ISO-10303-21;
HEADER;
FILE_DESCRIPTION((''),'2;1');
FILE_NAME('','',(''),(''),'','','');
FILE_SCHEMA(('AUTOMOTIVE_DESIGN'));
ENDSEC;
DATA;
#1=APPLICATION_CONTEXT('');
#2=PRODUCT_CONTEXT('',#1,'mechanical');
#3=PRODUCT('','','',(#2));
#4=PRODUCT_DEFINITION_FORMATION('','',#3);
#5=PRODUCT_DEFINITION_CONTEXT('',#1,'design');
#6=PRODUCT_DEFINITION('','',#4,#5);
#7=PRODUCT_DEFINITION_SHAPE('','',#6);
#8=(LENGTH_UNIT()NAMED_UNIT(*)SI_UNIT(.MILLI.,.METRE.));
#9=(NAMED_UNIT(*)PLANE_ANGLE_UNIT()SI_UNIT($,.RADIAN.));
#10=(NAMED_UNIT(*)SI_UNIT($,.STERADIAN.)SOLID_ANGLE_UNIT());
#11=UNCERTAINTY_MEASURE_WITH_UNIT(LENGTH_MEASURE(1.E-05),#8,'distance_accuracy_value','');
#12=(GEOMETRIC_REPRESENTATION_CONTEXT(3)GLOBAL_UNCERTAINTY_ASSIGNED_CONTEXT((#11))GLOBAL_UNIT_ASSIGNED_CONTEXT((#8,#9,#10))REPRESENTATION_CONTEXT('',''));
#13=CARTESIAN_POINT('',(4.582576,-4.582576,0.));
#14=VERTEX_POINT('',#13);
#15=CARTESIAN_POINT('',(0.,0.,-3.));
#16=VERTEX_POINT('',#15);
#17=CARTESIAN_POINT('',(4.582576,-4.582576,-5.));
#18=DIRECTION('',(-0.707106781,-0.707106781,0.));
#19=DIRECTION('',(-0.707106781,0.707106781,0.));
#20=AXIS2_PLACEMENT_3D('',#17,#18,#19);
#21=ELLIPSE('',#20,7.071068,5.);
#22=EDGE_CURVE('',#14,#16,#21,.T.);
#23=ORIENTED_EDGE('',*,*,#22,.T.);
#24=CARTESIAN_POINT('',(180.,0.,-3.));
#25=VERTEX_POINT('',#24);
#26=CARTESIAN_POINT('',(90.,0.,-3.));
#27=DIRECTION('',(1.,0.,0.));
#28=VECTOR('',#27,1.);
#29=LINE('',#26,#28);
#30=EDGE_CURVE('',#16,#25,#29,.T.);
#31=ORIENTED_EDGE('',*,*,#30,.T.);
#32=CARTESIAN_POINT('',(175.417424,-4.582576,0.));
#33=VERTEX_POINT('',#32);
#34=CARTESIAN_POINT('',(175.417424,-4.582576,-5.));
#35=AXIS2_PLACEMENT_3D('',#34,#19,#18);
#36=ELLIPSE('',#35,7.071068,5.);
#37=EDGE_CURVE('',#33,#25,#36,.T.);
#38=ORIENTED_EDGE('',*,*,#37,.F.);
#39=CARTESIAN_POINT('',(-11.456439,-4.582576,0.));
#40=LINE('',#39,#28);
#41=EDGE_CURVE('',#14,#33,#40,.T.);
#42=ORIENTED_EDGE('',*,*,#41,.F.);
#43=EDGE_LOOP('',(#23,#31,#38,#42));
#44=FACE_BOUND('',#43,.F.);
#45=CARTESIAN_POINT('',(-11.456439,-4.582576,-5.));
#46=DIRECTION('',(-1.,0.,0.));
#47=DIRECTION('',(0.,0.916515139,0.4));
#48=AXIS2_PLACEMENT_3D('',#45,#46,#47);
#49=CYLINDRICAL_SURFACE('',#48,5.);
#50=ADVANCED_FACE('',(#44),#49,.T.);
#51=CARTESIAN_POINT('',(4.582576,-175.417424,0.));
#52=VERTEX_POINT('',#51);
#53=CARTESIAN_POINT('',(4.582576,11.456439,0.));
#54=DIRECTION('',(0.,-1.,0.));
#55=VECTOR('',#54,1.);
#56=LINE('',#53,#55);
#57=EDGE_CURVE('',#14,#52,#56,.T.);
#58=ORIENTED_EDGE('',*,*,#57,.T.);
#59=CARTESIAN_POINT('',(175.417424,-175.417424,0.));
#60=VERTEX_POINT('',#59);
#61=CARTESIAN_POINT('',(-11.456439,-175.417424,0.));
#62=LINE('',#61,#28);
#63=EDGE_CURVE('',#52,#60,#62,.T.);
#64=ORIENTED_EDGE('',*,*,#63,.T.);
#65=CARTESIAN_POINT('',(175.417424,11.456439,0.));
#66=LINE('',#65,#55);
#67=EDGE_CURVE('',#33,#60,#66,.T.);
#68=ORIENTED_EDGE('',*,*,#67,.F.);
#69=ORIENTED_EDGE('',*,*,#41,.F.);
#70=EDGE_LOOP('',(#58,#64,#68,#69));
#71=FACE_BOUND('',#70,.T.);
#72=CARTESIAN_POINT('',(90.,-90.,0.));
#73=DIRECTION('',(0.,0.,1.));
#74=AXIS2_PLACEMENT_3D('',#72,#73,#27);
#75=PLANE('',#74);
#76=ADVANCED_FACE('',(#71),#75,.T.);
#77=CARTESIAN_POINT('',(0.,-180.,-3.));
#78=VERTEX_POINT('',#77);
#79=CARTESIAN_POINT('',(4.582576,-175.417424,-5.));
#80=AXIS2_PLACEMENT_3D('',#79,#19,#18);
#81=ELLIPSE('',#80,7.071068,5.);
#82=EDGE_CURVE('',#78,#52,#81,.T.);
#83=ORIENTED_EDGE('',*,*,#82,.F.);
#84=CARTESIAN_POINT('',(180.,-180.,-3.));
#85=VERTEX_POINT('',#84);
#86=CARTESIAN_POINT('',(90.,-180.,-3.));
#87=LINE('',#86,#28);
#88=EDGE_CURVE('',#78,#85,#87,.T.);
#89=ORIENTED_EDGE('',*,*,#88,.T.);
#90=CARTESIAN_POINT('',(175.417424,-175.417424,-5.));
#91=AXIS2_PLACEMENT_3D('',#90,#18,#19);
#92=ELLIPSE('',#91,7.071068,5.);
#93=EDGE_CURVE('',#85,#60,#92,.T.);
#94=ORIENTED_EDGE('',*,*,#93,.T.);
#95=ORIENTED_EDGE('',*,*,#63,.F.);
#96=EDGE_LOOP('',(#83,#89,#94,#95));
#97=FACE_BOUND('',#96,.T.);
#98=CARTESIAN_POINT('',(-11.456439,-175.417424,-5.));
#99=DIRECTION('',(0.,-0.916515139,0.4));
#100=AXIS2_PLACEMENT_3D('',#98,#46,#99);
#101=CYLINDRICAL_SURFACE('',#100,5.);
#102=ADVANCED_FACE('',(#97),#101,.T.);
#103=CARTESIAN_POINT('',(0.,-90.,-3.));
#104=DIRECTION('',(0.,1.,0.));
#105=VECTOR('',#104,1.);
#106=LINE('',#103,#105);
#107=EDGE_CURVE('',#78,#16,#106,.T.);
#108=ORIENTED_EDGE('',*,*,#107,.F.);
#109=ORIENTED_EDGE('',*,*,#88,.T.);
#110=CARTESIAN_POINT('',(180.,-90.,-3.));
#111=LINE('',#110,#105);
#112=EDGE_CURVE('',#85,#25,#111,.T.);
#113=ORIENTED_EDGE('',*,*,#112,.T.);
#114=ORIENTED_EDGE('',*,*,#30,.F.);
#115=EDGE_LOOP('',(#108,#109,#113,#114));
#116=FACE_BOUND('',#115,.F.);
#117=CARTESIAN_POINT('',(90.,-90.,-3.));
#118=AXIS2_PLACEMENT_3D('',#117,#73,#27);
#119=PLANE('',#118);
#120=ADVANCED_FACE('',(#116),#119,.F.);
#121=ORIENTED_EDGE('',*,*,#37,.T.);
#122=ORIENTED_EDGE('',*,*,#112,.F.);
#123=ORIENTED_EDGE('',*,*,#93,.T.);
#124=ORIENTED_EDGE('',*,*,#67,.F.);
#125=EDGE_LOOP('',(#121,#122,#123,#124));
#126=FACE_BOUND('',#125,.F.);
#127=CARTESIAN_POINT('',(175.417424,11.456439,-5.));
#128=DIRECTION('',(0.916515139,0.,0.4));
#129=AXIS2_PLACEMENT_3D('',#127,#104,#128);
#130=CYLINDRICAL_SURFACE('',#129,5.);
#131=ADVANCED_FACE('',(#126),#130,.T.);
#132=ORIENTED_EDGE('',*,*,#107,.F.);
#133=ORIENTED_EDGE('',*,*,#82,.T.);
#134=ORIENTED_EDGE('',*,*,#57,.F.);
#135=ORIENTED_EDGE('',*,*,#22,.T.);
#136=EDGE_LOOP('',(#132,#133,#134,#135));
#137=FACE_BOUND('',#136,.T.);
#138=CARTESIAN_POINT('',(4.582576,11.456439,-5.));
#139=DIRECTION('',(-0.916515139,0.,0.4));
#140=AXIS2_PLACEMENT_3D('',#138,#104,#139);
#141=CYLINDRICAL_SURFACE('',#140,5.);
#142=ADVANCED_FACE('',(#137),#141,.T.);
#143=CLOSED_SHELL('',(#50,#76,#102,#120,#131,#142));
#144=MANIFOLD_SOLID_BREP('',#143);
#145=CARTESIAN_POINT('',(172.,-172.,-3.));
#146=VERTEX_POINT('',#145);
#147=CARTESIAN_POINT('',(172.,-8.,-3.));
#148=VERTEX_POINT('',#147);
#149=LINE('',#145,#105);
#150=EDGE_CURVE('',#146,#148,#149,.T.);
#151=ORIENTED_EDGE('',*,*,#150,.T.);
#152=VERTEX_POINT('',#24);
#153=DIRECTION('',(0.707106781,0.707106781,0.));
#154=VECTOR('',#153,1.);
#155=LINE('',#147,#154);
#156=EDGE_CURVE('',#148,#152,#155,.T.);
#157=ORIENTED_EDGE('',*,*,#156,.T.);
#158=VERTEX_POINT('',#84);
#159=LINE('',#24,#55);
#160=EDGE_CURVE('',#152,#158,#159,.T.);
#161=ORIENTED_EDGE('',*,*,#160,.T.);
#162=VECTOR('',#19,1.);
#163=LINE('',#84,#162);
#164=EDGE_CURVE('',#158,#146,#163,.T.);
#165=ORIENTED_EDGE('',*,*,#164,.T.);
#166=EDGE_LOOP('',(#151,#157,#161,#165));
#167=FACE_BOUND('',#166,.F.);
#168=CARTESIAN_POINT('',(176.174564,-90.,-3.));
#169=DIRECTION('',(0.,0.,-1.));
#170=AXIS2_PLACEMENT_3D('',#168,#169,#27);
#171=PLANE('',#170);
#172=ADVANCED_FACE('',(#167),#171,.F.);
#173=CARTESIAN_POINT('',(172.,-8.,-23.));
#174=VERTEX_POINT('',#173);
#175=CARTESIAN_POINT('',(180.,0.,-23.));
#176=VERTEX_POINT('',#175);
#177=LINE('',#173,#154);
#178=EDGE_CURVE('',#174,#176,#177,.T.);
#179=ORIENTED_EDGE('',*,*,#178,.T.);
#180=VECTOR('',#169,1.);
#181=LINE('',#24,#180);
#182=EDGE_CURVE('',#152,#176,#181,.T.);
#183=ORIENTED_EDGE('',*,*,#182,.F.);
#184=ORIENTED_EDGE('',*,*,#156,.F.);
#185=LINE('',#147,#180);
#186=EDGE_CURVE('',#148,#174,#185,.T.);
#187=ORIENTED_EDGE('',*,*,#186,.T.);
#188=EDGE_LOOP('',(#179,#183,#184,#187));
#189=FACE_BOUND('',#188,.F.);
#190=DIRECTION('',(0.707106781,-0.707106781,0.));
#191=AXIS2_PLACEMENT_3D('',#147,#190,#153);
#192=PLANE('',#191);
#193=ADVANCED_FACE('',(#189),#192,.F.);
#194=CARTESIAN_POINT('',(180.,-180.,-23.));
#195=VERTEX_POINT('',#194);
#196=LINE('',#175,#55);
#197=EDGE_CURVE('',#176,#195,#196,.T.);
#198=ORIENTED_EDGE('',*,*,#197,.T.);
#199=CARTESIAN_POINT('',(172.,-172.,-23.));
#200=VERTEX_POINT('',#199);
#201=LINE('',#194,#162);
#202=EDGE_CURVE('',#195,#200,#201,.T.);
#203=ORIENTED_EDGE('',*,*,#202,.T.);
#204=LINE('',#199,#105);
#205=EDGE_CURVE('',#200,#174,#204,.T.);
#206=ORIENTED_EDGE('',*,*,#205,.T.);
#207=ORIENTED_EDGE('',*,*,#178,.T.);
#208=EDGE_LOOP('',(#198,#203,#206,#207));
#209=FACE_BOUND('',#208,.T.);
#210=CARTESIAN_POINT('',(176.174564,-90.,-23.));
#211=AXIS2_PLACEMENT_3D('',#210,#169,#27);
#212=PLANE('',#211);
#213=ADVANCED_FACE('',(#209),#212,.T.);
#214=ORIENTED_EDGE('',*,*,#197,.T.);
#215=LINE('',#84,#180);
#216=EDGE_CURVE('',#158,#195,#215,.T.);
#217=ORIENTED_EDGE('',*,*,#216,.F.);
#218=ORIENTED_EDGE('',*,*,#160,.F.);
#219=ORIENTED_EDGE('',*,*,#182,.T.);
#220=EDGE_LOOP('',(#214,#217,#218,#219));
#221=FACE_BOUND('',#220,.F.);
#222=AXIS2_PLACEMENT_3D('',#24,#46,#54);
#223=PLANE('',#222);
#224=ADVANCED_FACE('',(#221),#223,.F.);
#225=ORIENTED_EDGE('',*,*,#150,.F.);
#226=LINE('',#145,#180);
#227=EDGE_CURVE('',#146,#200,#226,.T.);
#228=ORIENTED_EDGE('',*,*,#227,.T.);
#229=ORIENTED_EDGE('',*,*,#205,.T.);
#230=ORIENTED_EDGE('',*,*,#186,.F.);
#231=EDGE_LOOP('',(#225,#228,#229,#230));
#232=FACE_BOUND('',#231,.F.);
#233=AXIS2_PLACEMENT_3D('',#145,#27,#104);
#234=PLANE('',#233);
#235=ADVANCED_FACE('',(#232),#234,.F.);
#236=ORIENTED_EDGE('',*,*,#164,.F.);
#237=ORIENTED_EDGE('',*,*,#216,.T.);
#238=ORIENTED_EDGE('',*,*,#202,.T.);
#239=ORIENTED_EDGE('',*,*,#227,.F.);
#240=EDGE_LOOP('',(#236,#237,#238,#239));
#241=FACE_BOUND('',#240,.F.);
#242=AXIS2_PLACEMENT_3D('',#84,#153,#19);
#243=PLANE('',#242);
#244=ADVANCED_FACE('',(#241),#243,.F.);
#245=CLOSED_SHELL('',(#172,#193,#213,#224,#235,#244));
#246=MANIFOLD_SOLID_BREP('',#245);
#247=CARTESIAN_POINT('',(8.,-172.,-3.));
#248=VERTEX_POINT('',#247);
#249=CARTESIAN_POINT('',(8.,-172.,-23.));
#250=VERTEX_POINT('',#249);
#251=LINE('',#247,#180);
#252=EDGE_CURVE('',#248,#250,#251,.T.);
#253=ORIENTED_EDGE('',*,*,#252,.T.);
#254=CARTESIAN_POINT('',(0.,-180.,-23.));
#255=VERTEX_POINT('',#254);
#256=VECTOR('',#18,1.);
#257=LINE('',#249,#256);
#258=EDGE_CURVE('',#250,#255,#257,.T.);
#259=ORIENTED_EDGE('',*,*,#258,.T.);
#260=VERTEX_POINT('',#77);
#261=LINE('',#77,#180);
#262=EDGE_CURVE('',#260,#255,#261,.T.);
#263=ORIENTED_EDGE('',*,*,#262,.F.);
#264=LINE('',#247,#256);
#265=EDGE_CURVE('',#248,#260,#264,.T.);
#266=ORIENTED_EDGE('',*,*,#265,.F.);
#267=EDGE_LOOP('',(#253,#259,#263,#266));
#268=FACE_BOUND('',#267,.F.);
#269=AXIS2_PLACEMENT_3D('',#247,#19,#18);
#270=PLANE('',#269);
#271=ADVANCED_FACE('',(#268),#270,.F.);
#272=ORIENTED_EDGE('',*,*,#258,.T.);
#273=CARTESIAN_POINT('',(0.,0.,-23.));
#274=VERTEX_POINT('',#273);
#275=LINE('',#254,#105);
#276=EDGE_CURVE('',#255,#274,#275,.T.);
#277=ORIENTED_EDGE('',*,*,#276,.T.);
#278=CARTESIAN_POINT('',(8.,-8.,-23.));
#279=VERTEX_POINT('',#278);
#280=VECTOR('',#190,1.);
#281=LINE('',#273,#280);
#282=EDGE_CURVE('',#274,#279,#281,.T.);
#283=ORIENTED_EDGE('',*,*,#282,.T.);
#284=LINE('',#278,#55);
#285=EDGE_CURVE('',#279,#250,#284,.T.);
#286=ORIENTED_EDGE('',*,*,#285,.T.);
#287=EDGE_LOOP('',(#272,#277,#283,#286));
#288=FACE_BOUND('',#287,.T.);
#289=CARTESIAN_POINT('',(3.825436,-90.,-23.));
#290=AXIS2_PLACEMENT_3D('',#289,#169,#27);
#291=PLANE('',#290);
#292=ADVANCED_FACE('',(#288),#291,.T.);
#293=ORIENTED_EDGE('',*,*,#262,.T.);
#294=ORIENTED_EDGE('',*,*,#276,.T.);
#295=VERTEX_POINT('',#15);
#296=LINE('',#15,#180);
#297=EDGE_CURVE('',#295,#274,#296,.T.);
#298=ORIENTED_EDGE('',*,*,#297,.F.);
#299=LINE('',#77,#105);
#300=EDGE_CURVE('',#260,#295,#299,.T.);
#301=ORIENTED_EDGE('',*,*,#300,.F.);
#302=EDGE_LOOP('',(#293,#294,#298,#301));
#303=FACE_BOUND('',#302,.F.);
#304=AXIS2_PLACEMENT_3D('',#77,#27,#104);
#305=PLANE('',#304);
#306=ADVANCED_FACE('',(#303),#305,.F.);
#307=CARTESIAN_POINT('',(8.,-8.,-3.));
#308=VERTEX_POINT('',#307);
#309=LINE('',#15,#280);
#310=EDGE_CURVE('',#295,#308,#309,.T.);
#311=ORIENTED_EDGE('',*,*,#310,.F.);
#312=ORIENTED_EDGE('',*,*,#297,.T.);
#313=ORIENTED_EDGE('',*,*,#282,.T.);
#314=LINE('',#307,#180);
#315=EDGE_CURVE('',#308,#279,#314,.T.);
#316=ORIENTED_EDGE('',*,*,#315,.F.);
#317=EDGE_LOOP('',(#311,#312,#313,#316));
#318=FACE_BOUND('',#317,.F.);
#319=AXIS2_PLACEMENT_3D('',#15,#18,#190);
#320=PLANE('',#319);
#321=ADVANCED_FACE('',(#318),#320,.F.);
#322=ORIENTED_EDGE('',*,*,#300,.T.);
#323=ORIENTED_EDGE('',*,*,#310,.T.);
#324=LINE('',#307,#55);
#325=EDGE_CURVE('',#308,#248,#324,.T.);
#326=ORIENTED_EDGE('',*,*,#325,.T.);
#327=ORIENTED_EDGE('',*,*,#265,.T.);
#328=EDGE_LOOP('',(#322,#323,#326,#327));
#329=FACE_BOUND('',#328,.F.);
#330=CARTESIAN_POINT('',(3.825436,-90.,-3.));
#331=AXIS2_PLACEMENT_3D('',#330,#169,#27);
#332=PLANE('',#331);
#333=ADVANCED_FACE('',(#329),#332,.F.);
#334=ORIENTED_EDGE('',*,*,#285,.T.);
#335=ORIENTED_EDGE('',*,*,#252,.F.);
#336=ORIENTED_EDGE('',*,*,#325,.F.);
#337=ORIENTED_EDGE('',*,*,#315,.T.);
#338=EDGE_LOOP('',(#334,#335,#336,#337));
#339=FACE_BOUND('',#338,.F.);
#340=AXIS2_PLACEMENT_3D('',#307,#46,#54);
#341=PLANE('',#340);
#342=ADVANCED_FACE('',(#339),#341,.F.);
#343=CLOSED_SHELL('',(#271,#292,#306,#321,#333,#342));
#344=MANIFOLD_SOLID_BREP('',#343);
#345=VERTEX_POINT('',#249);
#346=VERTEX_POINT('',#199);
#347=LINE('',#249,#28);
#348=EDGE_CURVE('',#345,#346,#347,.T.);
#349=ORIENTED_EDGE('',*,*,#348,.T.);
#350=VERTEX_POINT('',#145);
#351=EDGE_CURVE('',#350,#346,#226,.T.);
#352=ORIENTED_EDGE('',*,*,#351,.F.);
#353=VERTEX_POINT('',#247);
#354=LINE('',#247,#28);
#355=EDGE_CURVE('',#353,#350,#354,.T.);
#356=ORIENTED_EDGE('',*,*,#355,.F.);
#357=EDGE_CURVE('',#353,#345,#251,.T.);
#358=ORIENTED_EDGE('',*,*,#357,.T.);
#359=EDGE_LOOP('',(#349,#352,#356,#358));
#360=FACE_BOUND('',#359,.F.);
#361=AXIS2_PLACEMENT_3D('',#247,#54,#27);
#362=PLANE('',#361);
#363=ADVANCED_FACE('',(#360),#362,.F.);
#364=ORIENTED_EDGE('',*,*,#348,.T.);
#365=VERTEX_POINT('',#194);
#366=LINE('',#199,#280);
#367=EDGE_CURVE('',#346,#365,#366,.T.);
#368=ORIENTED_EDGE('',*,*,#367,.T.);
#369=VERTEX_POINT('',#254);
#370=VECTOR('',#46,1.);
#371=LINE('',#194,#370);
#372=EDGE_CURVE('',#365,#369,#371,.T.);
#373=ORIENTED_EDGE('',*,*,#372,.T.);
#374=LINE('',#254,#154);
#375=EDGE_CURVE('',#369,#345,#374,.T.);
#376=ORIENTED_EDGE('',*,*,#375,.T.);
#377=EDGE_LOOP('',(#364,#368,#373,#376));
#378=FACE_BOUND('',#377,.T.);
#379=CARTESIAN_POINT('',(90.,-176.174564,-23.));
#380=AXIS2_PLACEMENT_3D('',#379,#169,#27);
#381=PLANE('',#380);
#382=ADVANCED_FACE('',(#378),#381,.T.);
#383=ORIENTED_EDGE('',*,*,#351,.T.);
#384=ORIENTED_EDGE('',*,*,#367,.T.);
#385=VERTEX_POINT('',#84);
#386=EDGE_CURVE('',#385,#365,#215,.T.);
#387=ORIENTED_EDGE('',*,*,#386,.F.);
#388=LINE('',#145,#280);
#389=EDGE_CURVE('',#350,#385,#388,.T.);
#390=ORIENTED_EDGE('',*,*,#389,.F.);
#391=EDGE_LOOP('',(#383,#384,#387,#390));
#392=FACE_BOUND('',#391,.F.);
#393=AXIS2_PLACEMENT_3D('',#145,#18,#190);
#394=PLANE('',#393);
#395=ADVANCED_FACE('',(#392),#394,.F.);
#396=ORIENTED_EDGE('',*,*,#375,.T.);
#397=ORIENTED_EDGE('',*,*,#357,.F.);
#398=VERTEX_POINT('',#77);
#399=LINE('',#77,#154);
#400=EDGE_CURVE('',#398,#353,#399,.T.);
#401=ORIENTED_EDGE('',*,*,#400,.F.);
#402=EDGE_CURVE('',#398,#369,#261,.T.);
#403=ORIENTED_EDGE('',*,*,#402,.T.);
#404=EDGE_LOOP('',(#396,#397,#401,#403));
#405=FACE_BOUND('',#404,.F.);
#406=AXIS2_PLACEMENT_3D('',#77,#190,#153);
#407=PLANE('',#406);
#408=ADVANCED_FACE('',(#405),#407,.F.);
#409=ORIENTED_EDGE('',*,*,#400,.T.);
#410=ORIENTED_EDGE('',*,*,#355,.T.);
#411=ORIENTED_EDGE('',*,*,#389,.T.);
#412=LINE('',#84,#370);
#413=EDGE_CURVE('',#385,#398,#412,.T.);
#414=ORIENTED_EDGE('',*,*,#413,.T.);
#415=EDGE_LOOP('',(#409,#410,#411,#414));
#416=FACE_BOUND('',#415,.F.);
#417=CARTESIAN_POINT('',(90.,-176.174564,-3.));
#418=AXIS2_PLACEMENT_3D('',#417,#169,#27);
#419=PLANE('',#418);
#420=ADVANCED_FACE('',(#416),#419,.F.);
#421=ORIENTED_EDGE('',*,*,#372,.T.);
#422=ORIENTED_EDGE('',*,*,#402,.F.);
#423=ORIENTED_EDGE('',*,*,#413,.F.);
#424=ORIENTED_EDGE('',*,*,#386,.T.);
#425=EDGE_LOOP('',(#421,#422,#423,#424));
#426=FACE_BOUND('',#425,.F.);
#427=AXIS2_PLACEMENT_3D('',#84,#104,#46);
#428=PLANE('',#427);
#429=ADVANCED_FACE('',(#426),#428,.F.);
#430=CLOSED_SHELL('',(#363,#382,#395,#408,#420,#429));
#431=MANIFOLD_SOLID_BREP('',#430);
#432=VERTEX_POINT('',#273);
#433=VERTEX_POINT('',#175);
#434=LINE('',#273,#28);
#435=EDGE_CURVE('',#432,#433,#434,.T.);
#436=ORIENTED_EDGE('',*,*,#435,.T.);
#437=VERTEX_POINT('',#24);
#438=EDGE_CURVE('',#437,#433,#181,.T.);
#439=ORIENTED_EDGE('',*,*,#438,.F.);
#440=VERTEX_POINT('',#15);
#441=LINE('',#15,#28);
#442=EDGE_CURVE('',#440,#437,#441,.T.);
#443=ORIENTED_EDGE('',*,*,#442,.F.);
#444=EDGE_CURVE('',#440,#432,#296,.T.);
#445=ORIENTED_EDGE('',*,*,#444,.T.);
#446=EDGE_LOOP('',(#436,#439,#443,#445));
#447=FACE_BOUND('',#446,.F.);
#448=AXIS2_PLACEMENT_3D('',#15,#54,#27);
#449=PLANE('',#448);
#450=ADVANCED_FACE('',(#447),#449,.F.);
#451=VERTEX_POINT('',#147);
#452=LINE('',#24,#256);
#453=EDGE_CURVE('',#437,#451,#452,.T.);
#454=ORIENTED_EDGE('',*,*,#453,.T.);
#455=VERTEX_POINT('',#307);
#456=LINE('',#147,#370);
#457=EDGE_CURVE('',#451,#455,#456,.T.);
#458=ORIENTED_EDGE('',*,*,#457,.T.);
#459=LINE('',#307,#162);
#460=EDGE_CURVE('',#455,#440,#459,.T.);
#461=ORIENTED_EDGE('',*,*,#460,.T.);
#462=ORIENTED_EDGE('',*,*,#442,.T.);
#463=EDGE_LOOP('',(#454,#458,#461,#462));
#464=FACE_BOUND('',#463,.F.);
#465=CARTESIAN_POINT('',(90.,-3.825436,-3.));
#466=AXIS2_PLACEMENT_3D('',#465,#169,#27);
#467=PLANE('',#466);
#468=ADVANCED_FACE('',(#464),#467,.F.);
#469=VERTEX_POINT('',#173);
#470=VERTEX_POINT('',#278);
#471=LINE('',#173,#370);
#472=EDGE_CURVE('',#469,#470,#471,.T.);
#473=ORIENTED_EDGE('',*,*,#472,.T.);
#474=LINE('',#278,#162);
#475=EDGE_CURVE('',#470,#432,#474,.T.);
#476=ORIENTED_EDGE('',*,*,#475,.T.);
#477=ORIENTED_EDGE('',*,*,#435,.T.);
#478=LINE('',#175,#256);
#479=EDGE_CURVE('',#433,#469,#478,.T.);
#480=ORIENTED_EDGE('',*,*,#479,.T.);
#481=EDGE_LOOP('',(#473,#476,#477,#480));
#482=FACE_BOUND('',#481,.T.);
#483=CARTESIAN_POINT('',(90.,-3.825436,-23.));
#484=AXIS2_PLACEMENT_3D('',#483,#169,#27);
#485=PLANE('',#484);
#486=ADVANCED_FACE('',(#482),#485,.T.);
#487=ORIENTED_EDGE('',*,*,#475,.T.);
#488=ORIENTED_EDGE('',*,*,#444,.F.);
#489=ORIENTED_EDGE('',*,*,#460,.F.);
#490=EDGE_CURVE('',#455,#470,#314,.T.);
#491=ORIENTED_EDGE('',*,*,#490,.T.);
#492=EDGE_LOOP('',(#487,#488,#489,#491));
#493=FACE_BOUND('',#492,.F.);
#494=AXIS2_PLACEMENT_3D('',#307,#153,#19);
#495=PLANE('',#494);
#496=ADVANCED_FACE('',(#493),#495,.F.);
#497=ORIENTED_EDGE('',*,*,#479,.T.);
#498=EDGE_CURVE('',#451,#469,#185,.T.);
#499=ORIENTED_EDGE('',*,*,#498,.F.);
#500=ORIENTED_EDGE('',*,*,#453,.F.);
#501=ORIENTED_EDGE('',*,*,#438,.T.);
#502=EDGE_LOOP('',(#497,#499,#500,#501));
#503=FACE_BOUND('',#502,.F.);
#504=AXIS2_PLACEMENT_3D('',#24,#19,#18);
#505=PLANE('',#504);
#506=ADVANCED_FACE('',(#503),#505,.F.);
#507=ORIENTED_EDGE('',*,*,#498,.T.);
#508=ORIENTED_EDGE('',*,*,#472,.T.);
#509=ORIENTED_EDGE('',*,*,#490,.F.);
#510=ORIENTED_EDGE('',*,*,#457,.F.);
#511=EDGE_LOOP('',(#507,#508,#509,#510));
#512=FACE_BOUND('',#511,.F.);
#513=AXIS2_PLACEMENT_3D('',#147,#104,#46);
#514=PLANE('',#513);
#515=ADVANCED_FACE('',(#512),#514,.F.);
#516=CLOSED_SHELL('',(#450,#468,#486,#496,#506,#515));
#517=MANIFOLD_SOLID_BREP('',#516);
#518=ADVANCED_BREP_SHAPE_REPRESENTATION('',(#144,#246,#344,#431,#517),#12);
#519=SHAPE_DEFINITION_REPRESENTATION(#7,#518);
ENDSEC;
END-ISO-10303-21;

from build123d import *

# Parameters (mm, degrees)
F0_W        = 180
F0_H        = 180
F1_DEPTH    = 3
F3_DEPTH    = 20
F4_DEPTH    = 20
F5_DEPTH    = 20
F6_DEPTH    = 20
F7_T1_DEPTH = 202.9128784748
F7_T3_DEPTH = 202.9128784748


# Not quite as in the source:
# - a fillet or chamfer that OpenCascade refuses, or shapes differently, is made with other operations: its cross-section is extruded or revolved along the edge and cut away or added


with BuildPart() as f1:
    # F0 (on Top) → F1 (new body)
    with BuildSketch(Plane.XY):
        with Locations((90, -90)):
            Rectangle(F0_W, F0_H)
    extrude(amount=-F1_DEPTH)

    # F7: fillet of radius 5 on 4 edges, made by hand

    # F7_s2 → F7_t1 (cut)
    with BuildSketch(Plane.YZ.offset(-11.4564392374)):
        with BuildLine():
            ThreePointArc((-180, -3), (-178.1560370926, -0.8166998673), (-175.417424305, 0))
            Line((-175.417424305, 0), (-180, 0))
            Line((-180, 0), (-180, -3))
        make_face()
        with BuildLine():
            ThreePointArc((0, -3), (-1.8439629074, -0.8166998673), (-4.582575695, 0))
            Line((-4.582575695, 0), (0, 0))
            Line((0, 0), (0, -3))
        make_face()
    extrude(amount=F7_T1_DEPTH, mode=Mode.SUBTRACT)

    # F7_s4 → F7_t3 (cut)
    with BuildSketch(Plane.XZ.offset(-11.4564392374)):
        with BuildLine():
            ThreePointArc((180, -3), (178.1560370926, -0.8166998673), (175.417424305, 0))
            Line((175.417424305, 0), (180, 0))
            Line((180, 0), (180, -3))
        make_face()
        with BuildLine():
            ThreePointArc((0, -3), (1.8439629074, -0.8166998673), (4.582575695, 0))
            Line((4.582575695, 0), (0, 0))
            Line((0, 0), (0, -3))
        make_face()
    extrude(amount=F7_T3_DEPTH, mode=Mode.SUBTRACT)


with BuildPart() as f3:
    # F2 (on face) → F3 (new body)
    with BuildSketch(Plane(origin=(0, 0, -3), x_dir=(1, 0, 0), z_dir=(0, 0, -1))):
        Polygon((0, 180), (8, 172), (172, 172), (180, 180), align=None)
    extrude(amount=F3_DEPTH)


with BuildPart() as f4:
    # F2 (on face) → F4 (new body, through all)
    with BuildSketch(Plane(origin=(0, 0, -3), x_dir=(1, 0, 0), z_dir=(0, 0, -1))):
        Polygon((8, 8), (8, 172), (0, 180), (0, 0), align=None)
    extrude(amount=F4_DEPTH)


with BuildPart() as f5:
    # F2 (on face) → F5 (new body, through all)
    with BuildSketch(Plane(origin=(0, 0, -3), x_dir=(1, 0, 0), z_dir=(0, 0, -1))):
        Polygon((180, 180), (172, 172), (172, 8), (180, 0), align=None)
    extrude(amount=F5_DEPTH)


with BuildPart() as f6:
    # F2 (on face) → F6 (new body, through all)
    with BuildSketch(Plane(origin=(0, 0, -3), x_dir=(1, 0, 0), z_dir=(0, 0, -1))):
        Polygon((172, 8), (8, 8), (0, 0), (180, 0), align=None)
    extrude(amount=F6_DEPTH)


solid = Compound([f1.part, f3.part, f4.part, f5.part, f6.part])
